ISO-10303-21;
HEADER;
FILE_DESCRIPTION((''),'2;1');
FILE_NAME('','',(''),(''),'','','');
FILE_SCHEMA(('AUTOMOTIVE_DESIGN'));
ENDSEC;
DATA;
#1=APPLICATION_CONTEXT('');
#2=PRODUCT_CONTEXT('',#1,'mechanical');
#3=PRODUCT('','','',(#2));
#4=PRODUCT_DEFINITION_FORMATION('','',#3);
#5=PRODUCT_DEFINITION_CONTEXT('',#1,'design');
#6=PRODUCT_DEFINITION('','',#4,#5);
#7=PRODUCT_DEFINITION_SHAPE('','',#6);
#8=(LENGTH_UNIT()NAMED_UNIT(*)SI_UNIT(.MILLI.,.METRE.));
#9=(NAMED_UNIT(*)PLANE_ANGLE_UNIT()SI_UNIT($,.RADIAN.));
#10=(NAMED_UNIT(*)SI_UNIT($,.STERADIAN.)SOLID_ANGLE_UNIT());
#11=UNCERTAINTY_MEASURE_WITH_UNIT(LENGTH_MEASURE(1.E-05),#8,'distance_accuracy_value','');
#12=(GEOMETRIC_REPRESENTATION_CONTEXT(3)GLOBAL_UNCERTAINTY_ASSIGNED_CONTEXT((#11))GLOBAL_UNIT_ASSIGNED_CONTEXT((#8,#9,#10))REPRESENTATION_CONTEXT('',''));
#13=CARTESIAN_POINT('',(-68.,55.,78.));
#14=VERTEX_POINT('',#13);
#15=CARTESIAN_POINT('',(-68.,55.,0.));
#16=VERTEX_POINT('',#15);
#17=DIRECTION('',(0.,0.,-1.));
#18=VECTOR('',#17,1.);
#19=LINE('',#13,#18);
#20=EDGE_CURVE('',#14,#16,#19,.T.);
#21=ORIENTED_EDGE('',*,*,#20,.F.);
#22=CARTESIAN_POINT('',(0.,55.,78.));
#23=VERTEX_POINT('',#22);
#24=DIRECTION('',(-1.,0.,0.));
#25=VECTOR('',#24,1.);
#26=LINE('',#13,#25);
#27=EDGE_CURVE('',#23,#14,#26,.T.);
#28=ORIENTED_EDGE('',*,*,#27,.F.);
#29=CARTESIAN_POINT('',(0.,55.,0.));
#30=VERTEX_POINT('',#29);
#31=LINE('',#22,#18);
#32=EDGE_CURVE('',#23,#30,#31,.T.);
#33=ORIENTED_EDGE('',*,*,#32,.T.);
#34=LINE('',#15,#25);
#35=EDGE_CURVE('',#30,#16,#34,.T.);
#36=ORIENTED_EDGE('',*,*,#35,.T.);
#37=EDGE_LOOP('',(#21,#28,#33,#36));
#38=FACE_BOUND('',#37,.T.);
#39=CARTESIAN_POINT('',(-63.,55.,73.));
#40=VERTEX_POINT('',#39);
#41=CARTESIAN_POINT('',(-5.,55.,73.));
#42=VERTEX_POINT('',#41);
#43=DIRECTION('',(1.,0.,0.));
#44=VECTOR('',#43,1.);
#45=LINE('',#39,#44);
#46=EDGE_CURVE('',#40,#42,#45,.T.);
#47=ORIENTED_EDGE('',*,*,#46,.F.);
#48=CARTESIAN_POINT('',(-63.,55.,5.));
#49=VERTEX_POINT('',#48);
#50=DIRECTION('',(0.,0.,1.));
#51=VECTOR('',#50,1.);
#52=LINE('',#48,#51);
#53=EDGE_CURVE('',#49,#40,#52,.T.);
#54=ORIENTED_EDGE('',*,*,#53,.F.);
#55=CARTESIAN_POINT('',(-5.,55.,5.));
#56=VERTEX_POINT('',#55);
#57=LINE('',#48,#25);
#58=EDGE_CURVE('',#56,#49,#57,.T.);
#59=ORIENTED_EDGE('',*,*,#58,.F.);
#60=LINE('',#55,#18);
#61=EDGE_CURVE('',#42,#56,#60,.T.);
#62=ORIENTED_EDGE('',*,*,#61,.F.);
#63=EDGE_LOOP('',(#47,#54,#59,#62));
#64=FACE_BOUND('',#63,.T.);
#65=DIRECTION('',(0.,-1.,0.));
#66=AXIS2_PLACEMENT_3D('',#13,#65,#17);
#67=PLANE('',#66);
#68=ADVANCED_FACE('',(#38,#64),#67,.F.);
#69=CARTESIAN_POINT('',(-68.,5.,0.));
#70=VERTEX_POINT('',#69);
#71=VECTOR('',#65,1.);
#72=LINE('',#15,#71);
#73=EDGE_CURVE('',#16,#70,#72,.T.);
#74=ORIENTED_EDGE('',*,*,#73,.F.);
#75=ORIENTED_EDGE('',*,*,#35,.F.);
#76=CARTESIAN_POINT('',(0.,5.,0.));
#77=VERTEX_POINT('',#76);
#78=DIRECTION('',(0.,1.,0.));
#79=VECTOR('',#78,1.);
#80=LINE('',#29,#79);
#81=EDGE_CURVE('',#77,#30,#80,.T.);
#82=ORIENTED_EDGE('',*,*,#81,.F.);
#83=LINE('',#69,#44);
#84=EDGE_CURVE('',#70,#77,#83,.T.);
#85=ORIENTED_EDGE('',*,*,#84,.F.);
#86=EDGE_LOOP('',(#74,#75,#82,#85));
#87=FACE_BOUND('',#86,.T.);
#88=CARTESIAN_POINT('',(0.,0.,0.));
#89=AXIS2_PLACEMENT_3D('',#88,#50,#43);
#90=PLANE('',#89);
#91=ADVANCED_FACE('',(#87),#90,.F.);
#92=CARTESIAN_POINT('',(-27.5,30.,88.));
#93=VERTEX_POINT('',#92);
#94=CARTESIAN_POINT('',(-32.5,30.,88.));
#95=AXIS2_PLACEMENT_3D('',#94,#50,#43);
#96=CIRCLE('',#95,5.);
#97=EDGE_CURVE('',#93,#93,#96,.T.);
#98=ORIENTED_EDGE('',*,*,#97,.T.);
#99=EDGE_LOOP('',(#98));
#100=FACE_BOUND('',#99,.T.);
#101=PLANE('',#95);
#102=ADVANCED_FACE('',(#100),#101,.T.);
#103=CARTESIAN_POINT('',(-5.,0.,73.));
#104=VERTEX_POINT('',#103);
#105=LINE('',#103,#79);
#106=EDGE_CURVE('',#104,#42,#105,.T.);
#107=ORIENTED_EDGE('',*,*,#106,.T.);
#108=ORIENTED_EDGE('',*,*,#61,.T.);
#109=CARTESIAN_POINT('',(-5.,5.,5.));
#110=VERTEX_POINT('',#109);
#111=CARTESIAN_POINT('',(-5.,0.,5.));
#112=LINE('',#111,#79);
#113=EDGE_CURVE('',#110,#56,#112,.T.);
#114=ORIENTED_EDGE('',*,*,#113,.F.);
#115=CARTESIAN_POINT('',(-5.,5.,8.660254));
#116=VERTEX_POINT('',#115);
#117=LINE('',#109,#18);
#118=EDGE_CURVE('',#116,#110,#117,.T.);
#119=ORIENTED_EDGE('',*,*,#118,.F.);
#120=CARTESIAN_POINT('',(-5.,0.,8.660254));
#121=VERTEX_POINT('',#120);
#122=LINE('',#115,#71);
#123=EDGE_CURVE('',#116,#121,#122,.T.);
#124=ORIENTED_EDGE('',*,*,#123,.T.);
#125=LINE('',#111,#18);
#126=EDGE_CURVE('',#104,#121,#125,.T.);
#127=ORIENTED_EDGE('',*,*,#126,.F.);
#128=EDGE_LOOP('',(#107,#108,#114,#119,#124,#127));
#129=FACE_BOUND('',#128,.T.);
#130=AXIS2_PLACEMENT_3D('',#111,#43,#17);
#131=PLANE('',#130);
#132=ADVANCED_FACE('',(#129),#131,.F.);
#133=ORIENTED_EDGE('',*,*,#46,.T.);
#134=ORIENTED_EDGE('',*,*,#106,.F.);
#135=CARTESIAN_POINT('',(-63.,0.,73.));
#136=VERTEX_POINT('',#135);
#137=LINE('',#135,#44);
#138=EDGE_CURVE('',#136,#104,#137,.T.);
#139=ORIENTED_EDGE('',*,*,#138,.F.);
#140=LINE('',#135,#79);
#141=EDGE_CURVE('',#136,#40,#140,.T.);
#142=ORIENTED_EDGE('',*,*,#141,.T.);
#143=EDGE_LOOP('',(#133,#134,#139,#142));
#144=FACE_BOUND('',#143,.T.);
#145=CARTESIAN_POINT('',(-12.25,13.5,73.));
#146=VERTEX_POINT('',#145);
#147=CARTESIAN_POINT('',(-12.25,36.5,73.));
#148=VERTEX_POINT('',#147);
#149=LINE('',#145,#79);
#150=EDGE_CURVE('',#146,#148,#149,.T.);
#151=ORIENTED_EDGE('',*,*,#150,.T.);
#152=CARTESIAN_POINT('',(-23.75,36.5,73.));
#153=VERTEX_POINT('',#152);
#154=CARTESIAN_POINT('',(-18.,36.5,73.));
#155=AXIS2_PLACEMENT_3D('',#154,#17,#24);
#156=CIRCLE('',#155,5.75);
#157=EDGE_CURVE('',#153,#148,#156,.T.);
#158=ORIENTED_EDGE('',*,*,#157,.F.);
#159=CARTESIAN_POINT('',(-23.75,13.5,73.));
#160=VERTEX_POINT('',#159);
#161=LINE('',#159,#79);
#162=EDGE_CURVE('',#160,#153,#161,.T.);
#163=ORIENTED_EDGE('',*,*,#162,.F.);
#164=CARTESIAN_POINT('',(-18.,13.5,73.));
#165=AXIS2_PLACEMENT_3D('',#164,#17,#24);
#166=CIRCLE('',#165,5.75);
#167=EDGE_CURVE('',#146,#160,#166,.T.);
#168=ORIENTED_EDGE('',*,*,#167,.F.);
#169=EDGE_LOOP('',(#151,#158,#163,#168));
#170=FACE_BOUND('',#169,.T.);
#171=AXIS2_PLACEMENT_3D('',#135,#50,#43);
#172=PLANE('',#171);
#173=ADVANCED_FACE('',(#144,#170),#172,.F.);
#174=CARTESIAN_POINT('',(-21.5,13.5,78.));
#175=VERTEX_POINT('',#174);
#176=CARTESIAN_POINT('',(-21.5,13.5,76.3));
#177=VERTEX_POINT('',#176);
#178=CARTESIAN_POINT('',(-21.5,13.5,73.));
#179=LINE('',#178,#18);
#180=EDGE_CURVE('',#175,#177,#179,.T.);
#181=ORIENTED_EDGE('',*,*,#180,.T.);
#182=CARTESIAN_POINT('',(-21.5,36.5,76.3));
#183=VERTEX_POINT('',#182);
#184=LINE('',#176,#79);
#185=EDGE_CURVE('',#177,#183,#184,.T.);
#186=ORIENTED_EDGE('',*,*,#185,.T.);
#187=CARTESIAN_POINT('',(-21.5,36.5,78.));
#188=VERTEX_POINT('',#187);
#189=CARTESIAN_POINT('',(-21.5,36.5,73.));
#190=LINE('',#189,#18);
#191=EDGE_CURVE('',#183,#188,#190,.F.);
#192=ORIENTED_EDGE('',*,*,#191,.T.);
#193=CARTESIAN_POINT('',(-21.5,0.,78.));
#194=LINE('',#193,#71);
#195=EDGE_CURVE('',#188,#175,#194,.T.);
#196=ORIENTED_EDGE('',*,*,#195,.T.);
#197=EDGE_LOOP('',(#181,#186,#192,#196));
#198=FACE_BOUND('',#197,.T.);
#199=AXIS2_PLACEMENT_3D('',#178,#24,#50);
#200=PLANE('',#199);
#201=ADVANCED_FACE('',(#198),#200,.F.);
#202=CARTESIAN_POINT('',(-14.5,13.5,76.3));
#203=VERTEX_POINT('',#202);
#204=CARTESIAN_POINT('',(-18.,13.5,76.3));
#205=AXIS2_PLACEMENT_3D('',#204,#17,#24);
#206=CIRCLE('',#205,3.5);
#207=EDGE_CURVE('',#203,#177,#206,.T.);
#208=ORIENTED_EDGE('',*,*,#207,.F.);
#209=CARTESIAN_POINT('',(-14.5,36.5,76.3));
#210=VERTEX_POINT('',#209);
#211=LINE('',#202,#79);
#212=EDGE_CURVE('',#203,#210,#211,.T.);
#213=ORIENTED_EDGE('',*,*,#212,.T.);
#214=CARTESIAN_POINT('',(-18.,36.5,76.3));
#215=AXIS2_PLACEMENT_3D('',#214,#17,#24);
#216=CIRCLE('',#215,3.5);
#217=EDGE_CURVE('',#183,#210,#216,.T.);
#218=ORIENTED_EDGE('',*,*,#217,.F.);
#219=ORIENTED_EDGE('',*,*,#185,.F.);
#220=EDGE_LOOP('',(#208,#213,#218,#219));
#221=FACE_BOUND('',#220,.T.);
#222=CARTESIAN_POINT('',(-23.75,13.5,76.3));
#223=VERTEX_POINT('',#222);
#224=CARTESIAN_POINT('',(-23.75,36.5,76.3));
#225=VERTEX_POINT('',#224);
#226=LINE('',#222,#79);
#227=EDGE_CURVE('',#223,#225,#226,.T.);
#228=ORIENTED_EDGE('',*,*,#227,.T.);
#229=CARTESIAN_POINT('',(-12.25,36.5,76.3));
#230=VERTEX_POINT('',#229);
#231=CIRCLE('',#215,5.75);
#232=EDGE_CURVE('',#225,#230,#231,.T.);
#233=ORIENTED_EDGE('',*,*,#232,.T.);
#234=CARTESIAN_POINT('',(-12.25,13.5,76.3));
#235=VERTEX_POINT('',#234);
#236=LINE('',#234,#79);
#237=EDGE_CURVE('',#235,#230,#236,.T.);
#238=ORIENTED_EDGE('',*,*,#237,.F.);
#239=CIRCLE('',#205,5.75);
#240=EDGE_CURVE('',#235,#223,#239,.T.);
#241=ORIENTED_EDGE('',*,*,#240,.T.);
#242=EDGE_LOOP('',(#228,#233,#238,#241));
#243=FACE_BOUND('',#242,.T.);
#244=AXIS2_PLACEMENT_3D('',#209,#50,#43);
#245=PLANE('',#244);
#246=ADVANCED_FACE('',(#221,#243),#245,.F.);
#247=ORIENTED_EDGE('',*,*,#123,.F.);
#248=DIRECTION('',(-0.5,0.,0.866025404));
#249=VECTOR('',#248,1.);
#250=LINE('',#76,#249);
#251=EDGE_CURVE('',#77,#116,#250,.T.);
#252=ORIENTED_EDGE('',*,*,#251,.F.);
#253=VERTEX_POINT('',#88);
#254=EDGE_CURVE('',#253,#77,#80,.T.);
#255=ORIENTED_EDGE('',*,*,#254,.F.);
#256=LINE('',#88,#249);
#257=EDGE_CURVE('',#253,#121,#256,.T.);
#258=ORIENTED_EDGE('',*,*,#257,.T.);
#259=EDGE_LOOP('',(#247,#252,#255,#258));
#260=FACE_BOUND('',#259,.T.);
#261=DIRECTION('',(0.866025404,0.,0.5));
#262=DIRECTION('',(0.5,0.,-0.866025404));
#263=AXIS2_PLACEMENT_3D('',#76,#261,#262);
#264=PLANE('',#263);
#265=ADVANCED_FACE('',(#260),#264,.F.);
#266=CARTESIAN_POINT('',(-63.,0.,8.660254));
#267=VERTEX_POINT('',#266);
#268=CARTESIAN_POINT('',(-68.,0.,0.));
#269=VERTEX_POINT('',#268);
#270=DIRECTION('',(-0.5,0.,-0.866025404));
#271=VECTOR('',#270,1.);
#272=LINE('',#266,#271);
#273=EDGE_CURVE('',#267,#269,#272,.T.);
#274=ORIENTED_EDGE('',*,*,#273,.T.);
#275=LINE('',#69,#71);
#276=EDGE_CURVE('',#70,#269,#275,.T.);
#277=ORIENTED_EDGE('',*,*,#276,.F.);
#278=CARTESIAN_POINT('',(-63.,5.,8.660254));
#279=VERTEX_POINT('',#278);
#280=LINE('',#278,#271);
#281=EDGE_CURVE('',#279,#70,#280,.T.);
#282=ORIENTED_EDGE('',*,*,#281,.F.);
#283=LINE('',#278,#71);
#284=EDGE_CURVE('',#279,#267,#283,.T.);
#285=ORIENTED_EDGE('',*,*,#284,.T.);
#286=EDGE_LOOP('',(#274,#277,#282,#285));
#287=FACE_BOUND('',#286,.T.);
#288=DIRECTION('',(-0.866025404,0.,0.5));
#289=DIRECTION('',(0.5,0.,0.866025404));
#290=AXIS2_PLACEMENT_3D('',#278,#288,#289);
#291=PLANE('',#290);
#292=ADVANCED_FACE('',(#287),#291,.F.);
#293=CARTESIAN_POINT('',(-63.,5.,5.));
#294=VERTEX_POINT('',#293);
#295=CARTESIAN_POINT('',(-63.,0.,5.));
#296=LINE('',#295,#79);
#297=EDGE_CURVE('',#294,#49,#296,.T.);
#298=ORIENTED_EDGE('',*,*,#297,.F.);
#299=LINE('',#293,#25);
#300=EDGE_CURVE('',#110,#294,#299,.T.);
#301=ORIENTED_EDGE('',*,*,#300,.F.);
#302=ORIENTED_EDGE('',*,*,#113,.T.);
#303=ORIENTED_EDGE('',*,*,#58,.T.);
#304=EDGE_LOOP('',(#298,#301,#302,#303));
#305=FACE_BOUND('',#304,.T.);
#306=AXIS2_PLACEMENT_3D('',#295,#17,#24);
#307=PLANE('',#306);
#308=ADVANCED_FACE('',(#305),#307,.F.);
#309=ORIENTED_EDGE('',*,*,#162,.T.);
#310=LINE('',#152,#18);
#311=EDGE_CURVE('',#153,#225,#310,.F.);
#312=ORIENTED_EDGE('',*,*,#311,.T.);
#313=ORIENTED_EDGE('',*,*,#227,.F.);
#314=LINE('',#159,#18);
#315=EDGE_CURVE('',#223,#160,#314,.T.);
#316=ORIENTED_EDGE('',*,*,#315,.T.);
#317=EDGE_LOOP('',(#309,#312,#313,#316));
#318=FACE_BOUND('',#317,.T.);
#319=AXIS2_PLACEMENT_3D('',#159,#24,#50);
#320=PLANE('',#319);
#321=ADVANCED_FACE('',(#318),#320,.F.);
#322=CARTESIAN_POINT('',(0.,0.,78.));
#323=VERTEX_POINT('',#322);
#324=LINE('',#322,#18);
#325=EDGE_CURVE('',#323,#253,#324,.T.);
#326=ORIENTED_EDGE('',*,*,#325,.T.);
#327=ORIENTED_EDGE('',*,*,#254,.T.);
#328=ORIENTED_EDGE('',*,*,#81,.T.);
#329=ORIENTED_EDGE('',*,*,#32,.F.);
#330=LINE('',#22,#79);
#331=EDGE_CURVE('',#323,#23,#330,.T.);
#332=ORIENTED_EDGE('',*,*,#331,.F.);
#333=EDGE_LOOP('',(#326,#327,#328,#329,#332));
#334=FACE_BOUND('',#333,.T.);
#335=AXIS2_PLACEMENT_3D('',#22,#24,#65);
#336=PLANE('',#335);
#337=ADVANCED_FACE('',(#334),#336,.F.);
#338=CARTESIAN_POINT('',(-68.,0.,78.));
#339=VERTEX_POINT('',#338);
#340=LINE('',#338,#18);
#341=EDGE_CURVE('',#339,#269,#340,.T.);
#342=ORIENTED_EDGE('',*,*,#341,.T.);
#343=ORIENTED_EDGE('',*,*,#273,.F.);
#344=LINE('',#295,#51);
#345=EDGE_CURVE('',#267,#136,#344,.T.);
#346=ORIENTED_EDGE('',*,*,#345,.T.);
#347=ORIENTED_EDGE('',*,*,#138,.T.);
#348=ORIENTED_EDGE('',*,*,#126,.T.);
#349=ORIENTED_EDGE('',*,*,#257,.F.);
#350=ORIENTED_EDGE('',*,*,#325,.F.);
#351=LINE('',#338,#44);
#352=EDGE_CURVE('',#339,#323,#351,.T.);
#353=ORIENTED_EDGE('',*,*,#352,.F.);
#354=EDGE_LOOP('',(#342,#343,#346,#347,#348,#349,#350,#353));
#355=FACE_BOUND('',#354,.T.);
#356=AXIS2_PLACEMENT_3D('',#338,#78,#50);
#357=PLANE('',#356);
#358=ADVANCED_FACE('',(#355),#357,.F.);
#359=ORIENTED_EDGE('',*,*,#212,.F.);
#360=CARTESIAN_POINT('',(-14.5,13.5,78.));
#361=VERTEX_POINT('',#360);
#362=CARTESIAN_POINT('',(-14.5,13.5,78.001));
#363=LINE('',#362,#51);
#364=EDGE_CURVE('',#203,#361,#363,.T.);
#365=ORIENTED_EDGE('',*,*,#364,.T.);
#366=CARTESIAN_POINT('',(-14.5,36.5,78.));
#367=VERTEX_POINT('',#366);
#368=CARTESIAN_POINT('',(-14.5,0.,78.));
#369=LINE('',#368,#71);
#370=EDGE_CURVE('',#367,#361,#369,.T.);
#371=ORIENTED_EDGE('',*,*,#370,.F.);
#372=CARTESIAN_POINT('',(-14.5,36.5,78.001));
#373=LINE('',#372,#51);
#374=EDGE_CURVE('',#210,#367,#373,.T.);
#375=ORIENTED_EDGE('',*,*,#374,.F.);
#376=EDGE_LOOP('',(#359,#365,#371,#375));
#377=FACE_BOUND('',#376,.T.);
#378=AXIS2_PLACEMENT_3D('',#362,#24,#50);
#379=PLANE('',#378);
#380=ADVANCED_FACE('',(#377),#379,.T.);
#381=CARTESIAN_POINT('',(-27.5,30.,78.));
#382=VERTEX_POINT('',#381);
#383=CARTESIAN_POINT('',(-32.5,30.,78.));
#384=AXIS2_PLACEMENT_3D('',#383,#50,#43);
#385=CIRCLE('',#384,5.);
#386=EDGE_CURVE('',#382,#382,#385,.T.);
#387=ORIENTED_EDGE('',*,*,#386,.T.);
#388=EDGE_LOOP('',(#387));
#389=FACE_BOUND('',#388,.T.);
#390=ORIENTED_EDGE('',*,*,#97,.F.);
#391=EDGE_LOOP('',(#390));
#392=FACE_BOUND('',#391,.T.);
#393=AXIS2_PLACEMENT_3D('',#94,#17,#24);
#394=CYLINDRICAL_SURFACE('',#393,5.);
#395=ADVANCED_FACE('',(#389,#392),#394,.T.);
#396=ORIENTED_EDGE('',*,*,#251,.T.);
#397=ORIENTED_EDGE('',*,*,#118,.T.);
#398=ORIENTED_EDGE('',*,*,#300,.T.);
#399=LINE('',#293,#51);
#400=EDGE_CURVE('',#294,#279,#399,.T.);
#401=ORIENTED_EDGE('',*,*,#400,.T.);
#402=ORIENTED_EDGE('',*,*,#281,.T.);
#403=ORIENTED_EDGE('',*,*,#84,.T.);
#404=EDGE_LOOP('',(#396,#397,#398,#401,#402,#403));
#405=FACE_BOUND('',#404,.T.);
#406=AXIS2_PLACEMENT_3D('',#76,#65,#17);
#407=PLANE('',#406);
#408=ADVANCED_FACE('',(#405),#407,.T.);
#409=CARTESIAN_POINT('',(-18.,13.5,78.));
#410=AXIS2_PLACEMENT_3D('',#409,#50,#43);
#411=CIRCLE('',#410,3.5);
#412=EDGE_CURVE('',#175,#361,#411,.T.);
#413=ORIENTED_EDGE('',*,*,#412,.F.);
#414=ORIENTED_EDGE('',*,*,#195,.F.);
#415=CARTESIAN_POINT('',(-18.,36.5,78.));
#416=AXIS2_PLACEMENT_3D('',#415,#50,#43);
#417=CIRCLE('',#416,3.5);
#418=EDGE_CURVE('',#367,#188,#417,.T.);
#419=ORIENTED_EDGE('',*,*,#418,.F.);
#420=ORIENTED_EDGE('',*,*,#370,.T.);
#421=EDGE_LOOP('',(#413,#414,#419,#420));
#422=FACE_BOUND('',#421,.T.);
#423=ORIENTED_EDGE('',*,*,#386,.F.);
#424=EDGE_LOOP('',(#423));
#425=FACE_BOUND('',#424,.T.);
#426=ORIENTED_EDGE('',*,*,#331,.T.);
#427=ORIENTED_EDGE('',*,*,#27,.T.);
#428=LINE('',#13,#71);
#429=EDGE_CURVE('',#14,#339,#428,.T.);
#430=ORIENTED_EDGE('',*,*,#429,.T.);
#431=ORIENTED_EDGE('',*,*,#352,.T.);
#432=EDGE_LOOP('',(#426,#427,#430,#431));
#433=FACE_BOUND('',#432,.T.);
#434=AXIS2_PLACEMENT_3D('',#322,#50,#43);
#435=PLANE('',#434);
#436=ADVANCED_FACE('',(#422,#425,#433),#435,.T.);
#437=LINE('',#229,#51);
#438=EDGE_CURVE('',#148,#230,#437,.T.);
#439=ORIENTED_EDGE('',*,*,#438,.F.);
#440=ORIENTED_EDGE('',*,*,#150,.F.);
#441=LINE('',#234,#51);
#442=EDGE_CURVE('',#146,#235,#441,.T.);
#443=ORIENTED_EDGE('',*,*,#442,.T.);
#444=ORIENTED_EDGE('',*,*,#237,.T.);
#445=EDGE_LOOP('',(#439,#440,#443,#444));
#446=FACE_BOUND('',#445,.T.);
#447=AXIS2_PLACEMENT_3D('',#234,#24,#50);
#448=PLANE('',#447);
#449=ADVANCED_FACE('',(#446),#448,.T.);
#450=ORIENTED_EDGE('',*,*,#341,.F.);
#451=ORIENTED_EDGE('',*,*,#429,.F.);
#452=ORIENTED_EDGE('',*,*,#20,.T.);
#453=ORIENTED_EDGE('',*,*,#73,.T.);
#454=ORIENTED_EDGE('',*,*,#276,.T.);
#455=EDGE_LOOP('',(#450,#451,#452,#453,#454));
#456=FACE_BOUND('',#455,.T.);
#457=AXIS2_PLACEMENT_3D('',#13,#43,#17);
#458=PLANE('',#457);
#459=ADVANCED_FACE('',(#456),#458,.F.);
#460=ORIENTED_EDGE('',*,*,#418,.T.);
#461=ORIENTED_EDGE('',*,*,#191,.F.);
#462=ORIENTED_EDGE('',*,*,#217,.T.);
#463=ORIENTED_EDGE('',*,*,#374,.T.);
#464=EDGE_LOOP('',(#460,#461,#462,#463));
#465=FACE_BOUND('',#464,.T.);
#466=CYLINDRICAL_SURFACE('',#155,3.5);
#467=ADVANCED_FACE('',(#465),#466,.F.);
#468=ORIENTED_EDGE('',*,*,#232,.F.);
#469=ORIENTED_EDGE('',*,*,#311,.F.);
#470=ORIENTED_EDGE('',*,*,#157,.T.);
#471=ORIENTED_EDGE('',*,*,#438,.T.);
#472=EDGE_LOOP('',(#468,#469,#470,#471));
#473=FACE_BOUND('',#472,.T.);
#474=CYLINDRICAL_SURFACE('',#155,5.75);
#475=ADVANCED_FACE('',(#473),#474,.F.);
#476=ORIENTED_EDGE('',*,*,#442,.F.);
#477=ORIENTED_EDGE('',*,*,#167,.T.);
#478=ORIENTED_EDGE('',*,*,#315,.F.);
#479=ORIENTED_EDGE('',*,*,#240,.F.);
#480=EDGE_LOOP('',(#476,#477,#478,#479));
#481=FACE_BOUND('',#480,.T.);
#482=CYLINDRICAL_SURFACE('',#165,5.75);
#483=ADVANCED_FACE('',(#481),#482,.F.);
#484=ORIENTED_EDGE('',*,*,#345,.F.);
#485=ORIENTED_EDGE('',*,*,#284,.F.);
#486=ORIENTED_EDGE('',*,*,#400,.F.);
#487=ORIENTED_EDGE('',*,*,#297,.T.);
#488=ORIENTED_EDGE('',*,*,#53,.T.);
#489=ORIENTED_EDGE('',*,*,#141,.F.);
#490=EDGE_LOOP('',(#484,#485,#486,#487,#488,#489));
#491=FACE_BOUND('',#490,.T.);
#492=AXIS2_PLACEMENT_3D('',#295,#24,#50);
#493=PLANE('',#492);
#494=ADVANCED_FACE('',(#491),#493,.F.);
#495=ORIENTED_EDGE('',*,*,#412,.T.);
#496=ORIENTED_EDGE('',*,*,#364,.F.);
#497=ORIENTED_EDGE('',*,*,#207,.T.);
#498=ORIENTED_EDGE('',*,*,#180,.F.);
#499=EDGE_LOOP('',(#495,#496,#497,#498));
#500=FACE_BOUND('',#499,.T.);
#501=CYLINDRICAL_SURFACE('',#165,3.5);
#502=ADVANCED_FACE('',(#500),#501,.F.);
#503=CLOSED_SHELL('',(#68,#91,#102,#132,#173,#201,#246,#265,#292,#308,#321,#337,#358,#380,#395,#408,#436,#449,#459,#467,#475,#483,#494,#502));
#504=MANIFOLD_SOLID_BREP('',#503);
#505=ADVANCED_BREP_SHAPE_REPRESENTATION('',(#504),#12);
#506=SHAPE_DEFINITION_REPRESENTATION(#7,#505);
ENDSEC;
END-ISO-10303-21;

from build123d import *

# Parameters (mm, degrees)
SKIZZE1_W                                      = 68
SKIZZE1_H                                      = 55
AUFSATZ_LINEAR_AUSTRAGEN1_DEPTH                = 78
SKIZZE2_W                                      = 58
SKIZZE2_H                                      = 68
SCHNITT_LINEAR_AUSTRAGEN1_DEPTH                = 118.187883333
SKIZZE3_R                                      = 5
AUFSATZ_LINEAR_AUSTRAGEN2_DEPTH                = 10
STIRNSENKUNG_START                             = 73
STIRNSENKUNG_LANGLOCH_F_R_M6_SENKSCHRAUB_DEPTH = 3.3
STIRNSENKUNG_START_2                           = 76.3
STIRNSENKUNG_LANGLOCH_F_R_M6_SENKSCH_3_DEPTH   = 1.7
SCHNITT_LINEAR_AUSTRAGEN2_DEPTH                = 5


# Read off the part's stored shape, not the designer's step: Stirnsenkung Langloch für M6 Senkschraube (Kopf Button)1
with BuildPart() as part:
    # Skizze1 → Aufsatz-Linear austragen1 (new body)
    with BuildSketch(Plane.XY):
        with Locations((-34, 27.5)):
            Rectangle(SKIZZE1_W, SKIZZE1_H)
    extrude(amount=AUFSATZ_LINEAR_AUSTRAGEN1_DEPTH)

    # Skizze2 → Schnitt-Linear austragen1 (cut, through all)
    with BuildSketch(Plane(origin=(0, 55, 0), x_dir=(1, 0, 0), z_dir=(0, 1, 0))):
        with Locations((-34, -39)):
            Rectangle(SKIZZE2_W, SKIZZE2_H)
    extrude(amount=-SCHNITT_LINEAR_AUSTRAGEN1_DEPTH, mode=Mode.SUBTRACT)

    # Skizze3 → Aufsatz-Linear austragen2 (add)
    with BuildSketch(Plane.XY.offset(78)):
        with Locations((-32.5, 30)):
            Circle(SKIZZE3_R)
    extrude(amount=AUFSATZ_LINEAR_AUSTRAGEN2_DEPTH)

    # Stirnsenkung Langloch f_r M6 Senksch 2 → Stirnsenkung Langloch für M6 Senkschraube (Kopf Button)1 (cut)
    with BuildSketch(Plane.XY.offset(STIRNSENKUNG_START)):
        with BuildLine():
            ThreePointArc((-12.25, 36.5), (-18, 42.25), (-23.75, 36.5))
            Line((-23.75, 36.5), (-23.75, 13.5))
            ThreePointArc((-23.75, 13.5), (-18, 7.75), (-12.25, 13.5))
            Line((-12.25, 13.5), (-12.25, 36.5))
        make_face()
    extrude(amount=STIRNSENKUNG_LANGLOCH_F_R_M6_SENKSCHRAUB_DEPTH, mode=Mode.SUBTRACT)

    # Stirnsenkung Langloch f_r M6 Senksch 3 o → Stirnsenkung Langloch f_r M6 Senksch 3 (cut)
    with BuildSketch(Plane.XY.offset(STIRNSENKUNG_START_2)):
        with BuildLine():
            ThreePointArc((-14.5, 36.5), (-18, 40), (-21.5, 36.5))
            Line((-21.5, 36.5), (-21.5, 13.5))
            ThreePointArc((-21.5, 13.5), (-18, 10), (-14.5, 13.5))
            Line((-14.5, 13.5), (-14.5, 36.5))
        make_face()
    extrude(amount=STIRNSENKUNG_LANGLOCH_F_R_M6_SENKSCH_3_DEPTH, mode=Mode.SUBTRACT)

    # Skizze15 → Schnitt-Linear austragen2 (cut)
    with BuildSketch(Plane.XZ):
        Polygon((0, 0), (-5, 8.660254038), (-63, 8.660254038), (-68, 0), align=None)
    extrude(amount=-SCHNITT_LINEAR_AUSTRAGEN2_DEPTH, mode=Mode.SUBTRACT)


solid = part.part
